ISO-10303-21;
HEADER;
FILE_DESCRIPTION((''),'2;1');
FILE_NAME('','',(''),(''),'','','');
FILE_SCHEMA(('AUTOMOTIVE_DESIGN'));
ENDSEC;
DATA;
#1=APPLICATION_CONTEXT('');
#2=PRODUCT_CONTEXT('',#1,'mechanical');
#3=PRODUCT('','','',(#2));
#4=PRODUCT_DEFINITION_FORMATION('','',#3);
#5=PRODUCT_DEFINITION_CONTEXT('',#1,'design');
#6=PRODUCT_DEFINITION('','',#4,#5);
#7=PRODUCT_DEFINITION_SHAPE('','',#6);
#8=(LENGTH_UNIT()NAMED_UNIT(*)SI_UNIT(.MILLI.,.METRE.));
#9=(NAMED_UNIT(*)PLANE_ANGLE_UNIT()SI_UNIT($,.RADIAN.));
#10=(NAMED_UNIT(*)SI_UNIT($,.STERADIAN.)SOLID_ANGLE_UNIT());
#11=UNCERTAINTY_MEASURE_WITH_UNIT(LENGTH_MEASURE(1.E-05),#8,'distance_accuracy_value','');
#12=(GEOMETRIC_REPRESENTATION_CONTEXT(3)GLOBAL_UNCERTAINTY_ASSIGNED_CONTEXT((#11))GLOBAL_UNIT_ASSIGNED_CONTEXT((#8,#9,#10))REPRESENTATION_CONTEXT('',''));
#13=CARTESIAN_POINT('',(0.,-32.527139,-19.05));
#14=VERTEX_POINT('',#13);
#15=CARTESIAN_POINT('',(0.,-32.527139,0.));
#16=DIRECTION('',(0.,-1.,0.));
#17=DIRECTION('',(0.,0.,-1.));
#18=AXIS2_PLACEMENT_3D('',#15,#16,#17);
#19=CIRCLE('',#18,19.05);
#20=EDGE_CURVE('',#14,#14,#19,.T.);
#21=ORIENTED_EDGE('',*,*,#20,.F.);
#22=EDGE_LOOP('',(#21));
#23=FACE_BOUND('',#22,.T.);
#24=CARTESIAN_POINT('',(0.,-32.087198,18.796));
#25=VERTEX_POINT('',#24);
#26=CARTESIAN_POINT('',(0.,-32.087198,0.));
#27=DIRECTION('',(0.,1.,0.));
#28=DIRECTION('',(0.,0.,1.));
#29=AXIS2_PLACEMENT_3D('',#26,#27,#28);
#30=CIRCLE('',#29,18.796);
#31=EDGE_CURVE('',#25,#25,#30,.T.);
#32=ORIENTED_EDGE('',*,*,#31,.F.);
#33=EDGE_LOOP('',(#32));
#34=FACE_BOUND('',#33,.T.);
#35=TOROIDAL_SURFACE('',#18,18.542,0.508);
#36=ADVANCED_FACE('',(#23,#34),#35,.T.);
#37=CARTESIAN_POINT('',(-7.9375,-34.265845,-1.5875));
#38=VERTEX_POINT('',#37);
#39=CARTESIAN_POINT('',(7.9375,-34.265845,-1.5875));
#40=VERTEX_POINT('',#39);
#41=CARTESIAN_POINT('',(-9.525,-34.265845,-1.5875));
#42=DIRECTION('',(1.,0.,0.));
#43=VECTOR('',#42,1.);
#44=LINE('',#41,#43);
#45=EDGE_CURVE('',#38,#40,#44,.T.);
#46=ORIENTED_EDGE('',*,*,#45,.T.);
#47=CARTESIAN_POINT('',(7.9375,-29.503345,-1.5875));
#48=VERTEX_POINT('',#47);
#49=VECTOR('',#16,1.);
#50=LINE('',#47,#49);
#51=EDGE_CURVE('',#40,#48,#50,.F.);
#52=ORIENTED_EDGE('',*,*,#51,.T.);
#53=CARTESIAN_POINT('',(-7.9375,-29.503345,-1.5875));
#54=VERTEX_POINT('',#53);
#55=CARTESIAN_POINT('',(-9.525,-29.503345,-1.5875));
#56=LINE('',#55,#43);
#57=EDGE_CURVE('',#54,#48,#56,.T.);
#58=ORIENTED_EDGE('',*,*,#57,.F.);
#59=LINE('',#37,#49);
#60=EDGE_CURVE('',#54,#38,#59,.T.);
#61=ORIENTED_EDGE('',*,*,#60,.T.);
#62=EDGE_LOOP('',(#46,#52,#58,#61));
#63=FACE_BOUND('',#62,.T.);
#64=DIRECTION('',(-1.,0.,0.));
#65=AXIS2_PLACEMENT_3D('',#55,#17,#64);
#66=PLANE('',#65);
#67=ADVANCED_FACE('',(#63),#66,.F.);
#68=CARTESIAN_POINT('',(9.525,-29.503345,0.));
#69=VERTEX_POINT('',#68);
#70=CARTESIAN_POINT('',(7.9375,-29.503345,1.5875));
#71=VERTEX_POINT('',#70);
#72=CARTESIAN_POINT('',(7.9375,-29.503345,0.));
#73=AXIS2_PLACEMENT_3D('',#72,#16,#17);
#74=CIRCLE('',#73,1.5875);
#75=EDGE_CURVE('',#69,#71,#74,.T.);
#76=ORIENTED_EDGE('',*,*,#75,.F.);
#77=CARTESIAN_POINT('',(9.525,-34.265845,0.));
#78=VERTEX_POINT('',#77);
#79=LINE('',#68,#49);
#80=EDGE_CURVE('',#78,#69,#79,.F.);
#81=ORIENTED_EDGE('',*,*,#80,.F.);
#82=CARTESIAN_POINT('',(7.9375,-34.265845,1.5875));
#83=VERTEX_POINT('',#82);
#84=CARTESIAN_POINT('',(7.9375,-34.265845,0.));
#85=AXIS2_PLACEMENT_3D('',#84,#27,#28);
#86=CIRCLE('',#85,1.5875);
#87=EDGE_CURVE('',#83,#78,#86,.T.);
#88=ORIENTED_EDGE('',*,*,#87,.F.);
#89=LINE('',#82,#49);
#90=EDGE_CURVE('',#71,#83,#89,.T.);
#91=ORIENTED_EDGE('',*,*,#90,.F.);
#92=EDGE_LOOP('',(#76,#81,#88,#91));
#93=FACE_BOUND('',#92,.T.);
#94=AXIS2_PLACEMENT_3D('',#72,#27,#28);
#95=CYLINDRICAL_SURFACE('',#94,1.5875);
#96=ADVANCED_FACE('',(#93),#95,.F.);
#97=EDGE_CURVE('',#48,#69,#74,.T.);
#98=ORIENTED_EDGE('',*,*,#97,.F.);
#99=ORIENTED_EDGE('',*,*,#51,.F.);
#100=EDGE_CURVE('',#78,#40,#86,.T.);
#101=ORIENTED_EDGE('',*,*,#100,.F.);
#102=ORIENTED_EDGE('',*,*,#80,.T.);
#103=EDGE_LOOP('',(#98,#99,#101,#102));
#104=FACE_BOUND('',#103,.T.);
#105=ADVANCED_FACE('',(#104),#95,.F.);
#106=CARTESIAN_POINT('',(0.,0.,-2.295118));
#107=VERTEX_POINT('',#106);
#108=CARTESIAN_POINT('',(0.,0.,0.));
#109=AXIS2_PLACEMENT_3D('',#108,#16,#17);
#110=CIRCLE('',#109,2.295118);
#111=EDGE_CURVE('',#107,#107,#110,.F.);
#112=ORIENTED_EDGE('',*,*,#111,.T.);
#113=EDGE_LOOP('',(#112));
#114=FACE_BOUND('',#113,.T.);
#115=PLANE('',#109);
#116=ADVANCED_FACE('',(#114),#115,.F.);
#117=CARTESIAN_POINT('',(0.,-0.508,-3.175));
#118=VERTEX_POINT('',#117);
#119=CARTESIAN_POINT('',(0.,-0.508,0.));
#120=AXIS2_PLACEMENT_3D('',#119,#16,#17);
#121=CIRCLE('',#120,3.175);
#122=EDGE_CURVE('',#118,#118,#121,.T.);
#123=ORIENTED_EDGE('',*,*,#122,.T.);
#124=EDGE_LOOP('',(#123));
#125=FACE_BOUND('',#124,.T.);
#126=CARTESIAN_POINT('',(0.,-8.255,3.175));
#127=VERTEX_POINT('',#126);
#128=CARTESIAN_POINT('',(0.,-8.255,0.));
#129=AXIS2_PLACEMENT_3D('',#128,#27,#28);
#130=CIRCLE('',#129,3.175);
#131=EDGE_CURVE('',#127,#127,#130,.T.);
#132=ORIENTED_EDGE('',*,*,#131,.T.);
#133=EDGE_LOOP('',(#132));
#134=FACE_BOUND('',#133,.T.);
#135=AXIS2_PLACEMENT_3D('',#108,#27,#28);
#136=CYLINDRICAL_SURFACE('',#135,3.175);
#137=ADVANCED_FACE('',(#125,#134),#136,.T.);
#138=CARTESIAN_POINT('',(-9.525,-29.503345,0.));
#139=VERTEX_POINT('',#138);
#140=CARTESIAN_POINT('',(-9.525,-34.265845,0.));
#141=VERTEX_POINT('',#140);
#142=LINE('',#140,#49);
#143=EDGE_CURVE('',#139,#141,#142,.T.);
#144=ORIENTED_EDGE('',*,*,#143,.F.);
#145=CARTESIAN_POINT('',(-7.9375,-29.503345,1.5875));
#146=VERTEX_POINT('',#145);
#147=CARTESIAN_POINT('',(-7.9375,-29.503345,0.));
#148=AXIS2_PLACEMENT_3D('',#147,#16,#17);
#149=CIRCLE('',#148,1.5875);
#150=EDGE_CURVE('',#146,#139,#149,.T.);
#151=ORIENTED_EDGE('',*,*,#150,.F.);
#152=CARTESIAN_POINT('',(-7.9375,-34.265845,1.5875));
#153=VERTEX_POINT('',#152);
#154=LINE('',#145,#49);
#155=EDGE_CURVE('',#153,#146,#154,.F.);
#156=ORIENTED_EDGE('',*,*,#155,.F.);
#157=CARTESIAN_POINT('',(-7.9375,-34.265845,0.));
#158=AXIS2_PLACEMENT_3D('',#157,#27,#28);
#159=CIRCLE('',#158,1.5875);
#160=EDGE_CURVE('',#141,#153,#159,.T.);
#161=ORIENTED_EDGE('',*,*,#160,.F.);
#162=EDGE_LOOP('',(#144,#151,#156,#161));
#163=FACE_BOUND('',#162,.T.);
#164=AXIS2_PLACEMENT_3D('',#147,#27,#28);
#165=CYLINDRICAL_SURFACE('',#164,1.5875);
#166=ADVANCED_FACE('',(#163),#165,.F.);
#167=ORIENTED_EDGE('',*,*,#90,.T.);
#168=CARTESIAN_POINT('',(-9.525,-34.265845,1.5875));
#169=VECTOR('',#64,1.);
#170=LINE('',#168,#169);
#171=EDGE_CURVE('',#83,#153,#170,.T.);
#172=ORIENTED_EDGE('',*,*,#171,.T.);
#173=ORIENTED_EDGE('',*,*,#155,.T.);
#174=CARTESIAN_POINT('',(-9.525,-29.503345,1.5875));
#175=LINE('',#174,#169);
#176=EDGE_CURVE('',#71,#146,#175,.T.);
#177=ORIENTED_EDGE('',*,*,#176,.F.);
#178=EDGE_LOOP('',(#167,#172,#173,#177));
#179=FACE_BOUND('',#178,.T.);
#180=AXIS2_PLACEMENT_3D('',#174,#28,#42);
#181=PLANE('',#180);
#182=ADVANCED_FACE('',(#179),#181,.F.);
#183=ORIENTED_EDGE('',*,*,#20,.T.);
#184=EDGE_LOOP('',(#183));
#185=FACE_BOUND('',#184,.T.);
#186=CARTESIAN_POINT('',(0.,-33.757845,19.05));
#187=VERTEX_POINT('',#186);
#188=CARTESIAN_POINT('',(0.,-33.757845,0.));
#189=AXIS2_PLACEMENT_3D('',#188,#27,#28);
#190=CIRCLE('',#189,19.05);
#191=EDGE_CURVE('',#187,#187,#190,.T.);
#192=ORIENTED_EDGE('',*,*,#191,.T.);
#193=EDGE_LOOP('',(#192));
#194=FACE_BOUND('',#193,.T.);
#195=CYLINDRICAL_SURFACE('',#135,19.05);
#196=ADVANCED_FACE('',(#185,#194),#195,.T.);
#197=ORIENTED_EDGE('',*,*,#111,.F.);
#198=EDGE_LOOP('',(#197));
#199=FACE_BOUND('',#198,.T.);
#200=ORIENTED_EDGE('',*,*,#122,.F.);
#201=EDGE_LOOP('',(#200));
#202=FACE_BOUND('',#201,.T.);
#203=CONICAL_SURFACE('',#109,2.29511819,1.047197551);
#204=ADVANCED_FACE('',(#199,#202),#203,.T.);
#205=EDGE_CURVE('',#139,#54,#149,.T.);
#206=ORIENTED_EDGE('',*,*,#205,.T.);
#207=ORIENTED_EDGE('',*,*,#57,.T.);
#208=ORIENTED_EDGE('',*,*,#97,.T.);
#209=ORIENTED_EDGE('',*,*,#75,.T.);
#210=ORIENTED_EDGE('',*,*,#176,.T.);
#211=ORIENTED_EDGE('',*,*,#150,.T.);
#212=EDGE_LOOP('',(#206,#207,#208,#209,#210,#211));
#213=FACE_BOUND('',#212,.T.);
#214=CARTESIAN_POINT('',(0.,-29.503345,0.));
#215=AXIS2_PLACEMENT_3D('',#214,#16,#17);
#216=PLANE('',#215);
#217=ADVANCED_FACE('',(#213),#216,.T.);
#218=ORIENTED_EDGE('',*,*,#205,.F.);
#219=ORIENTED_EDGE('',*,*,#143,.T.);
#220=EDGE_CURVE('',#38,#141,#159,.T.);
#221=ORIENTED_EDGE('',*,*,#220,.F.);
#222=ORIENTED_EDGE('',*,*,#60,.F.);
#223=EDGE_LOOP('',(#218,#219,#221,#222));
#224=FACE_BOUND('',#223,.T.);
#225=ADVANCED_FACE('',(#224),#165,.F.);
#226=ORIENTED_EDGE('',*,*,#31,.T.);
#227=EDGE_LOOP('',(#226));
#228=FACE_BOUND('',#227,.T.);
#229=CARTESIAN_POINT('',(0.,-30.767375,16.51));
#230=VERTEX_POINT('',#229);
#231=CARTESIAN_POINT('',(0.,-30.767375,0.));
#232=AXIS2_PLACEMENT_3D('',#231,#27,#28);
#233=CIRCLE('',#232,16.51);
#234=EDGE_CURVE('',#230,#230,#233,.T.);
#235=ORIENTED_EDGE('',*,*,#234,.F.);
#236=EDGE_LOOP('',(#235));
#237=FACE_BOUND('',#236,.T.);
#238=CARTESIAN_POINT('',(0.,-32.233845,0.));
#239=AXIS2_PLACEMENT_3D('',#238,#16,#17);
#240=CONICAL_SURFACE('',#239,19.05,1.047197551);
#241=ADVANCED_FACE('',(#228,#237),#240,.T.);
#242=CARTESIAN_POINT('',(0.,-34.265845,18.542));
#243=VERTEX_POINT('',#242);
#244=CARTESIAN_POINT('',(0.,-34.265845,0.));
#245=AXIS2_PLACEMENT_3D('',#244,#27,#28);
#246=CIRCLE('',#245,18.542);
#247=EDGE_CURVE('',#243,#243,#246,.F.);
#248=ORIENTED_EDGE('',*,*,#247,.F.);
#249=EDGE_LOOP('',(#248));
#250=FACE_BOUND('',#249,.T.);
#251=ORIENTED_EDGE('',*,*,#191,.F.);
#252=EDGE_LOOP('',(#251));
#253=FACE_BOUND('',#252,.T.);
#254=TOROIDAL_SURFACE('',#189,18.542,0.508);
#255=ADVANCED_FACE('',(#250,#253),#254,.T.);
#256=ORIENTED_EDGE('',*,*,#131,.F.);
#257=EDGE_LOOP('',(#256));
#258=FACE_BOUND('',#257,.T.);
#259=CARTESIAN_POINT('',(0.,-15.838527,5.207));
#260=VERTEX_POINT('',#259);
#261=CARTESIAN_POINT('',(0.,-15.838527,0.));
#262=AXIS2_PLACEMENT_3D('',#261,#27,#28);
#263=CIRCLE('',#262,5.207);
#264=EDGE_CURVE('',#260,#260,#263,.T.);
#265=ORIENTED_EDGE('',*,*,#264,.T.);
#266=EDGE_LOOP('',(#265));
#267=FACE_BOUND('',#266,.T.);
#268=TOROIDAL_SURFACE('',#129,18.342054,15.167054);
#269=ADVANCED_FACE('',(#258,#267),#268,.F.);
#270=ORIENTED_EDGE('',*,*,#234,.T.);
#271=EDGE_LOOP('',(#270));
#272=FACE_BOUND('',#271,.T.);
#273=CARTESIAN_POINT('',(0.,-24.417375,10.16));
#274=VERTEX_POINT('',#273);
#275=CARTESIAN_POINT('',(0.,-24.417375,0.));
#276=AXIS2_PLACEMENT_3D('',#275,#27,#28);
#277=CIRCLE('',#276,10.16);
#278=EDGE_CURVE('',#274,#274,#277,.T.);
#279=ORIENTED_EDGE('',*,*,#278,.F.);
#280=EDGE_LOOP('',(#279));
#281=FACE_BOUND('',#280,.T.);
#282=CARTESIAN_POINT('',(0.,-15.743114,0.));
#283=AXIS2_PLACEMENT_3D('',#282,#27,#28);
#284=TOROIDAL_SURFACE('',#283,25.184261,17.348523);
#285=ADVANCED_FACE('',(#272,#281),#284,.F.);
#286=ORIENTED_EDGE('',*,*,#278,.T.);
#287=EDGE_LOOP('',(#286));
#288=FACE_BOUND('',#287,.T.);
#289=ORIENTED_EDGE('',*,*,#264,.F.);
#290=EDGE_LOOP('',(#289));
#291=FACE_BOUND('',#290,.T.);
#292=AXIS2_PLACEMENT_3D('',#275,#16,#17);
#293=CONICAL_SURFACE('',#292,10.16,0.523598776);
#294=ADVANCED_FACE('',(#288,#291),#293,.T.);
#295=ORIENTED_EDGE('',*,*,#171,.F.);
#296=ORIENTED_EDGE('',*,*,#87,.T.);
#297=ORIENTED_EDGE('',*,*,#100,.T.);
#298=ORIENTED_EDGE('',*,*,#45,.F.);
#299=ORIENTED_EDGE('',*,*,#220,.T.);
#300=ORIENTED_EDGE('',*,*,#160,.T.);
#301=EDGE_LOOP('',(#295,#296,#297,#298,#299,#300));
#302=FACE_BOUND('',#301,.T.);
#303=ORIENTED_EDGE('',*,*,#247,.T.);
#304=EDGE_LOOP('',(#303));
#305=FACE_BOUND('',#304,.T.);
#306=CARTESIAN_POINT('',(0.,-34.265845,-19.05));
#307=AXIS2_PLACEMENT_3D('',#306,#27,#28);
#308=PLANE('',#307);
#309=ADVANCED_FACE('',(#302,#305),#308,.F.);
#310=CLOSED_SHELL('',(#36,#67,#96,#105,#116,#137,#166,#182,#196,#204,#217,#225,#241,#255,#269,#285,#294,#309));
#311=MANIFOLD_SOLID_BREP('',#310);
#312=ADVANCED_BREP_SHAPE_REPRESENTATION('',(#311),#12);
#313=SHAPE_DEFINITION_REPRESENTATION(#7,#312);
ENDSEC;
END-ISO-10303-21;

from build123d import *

# Parameters (mm, degrees)
FILLET1_R          = 0.508
CHAMFER1_SIZE      = 0.508
CHAMFER1_SIZE2     = 0.87988181
SKETCH4_W          = 19.05
SKETCH4_H          = 3.175
CUT_EXTRUDE1_DEPTH = 4.7625
FILLET2_R          = 1.5875


with BuildPart() as part:
    # Sketch3 → Revolve1 (revolve)
    with BuildSketch(Plane(origin=(0, 0, 0), x_dir=(0, 0, -1), z_dir=(1, 0, 0)), mode=Mode.PRIVATE) as revolve1_sk:
        with BuildLine():
            Line((0, 0), (3.175, 0))
            Line((3.175, 0), (3.175, -8.255))
            ThreePointArc((3.175, -8.255), (3.691804849, -12.180522558), (5.207, -15.838527241))
            Line((5.207, -15.838527241), (10.16, -24.417374891))
            ThreePointArc((10.16, -24.417374891), (12.91700332, -28.010371571), (16.51, -30.767374891))
            Line((16.51, -30.767374891), (19.05, -32.233844575))
            Line((19.05, -32.233844575), (19.05, -34.265844575))
            Line((19.05, -34.265844575), (0, -34.265844575))
            Line((0, -34.265844575), (0, 0))
        make_face()
    revolve(revolve1_sk.sketch.rotate(Axis((0, 0, 0), (0, -1, 0)), 180), axis=Axis((0, 0, 0), (0, -1, 0)))

    # Fillet1
    fillet1_edges = [part.edges().sort_by_distance(p)[0] for p in [
        (0, -32.233844575, -19.05),
        (0, -34.265844575, -19.05),
    ]]
    fillet(fillet1_edges, radius=FILLET1_R)

    # Chamfer1
    chamfer1_edges = [part.edges().sort_by_distance(p)[0] for p in [
        (0, 0, -3.175),
    ]]
    chamfer1_side = [part.faces().sort_by_distance(p)[0] for p in [
        (0, -4.1275, -3.175),
    ]]
    chamfer(chamfer1_edges, length=CHAMFER1_SIZE, length2=CHAMFER1_SIZE2, reference=chamfer1_side[0])

    # Sketch4 → Cut-Extrude1 (cut)
    with BuildSketch(Plane.XZ.offset(34.265844575)):
        Rectangle(SKETCH4_W, SKETCH4_H)
    extrude(amount=-CUT_EXTRUDE1_DEPTH, mode=Mode.SUBTRACT)

    # Fillet2
    fillet2_edges = [part.edges().sort_by_distance(p)[0] for p in [
        (-9.525, -31.884594575, -1.5875),
        (9.525, -31.884594575, -1.5875),
        (9.525, -31.884594575, 1.5875),
        (-9.525, -31.884594575, 1.5875),
    ]]
    fillet(fillet2_edges, radius=FILLET2_R - 0.0001)  # a hair under: the kernel refuses the full size


solid = part.part
